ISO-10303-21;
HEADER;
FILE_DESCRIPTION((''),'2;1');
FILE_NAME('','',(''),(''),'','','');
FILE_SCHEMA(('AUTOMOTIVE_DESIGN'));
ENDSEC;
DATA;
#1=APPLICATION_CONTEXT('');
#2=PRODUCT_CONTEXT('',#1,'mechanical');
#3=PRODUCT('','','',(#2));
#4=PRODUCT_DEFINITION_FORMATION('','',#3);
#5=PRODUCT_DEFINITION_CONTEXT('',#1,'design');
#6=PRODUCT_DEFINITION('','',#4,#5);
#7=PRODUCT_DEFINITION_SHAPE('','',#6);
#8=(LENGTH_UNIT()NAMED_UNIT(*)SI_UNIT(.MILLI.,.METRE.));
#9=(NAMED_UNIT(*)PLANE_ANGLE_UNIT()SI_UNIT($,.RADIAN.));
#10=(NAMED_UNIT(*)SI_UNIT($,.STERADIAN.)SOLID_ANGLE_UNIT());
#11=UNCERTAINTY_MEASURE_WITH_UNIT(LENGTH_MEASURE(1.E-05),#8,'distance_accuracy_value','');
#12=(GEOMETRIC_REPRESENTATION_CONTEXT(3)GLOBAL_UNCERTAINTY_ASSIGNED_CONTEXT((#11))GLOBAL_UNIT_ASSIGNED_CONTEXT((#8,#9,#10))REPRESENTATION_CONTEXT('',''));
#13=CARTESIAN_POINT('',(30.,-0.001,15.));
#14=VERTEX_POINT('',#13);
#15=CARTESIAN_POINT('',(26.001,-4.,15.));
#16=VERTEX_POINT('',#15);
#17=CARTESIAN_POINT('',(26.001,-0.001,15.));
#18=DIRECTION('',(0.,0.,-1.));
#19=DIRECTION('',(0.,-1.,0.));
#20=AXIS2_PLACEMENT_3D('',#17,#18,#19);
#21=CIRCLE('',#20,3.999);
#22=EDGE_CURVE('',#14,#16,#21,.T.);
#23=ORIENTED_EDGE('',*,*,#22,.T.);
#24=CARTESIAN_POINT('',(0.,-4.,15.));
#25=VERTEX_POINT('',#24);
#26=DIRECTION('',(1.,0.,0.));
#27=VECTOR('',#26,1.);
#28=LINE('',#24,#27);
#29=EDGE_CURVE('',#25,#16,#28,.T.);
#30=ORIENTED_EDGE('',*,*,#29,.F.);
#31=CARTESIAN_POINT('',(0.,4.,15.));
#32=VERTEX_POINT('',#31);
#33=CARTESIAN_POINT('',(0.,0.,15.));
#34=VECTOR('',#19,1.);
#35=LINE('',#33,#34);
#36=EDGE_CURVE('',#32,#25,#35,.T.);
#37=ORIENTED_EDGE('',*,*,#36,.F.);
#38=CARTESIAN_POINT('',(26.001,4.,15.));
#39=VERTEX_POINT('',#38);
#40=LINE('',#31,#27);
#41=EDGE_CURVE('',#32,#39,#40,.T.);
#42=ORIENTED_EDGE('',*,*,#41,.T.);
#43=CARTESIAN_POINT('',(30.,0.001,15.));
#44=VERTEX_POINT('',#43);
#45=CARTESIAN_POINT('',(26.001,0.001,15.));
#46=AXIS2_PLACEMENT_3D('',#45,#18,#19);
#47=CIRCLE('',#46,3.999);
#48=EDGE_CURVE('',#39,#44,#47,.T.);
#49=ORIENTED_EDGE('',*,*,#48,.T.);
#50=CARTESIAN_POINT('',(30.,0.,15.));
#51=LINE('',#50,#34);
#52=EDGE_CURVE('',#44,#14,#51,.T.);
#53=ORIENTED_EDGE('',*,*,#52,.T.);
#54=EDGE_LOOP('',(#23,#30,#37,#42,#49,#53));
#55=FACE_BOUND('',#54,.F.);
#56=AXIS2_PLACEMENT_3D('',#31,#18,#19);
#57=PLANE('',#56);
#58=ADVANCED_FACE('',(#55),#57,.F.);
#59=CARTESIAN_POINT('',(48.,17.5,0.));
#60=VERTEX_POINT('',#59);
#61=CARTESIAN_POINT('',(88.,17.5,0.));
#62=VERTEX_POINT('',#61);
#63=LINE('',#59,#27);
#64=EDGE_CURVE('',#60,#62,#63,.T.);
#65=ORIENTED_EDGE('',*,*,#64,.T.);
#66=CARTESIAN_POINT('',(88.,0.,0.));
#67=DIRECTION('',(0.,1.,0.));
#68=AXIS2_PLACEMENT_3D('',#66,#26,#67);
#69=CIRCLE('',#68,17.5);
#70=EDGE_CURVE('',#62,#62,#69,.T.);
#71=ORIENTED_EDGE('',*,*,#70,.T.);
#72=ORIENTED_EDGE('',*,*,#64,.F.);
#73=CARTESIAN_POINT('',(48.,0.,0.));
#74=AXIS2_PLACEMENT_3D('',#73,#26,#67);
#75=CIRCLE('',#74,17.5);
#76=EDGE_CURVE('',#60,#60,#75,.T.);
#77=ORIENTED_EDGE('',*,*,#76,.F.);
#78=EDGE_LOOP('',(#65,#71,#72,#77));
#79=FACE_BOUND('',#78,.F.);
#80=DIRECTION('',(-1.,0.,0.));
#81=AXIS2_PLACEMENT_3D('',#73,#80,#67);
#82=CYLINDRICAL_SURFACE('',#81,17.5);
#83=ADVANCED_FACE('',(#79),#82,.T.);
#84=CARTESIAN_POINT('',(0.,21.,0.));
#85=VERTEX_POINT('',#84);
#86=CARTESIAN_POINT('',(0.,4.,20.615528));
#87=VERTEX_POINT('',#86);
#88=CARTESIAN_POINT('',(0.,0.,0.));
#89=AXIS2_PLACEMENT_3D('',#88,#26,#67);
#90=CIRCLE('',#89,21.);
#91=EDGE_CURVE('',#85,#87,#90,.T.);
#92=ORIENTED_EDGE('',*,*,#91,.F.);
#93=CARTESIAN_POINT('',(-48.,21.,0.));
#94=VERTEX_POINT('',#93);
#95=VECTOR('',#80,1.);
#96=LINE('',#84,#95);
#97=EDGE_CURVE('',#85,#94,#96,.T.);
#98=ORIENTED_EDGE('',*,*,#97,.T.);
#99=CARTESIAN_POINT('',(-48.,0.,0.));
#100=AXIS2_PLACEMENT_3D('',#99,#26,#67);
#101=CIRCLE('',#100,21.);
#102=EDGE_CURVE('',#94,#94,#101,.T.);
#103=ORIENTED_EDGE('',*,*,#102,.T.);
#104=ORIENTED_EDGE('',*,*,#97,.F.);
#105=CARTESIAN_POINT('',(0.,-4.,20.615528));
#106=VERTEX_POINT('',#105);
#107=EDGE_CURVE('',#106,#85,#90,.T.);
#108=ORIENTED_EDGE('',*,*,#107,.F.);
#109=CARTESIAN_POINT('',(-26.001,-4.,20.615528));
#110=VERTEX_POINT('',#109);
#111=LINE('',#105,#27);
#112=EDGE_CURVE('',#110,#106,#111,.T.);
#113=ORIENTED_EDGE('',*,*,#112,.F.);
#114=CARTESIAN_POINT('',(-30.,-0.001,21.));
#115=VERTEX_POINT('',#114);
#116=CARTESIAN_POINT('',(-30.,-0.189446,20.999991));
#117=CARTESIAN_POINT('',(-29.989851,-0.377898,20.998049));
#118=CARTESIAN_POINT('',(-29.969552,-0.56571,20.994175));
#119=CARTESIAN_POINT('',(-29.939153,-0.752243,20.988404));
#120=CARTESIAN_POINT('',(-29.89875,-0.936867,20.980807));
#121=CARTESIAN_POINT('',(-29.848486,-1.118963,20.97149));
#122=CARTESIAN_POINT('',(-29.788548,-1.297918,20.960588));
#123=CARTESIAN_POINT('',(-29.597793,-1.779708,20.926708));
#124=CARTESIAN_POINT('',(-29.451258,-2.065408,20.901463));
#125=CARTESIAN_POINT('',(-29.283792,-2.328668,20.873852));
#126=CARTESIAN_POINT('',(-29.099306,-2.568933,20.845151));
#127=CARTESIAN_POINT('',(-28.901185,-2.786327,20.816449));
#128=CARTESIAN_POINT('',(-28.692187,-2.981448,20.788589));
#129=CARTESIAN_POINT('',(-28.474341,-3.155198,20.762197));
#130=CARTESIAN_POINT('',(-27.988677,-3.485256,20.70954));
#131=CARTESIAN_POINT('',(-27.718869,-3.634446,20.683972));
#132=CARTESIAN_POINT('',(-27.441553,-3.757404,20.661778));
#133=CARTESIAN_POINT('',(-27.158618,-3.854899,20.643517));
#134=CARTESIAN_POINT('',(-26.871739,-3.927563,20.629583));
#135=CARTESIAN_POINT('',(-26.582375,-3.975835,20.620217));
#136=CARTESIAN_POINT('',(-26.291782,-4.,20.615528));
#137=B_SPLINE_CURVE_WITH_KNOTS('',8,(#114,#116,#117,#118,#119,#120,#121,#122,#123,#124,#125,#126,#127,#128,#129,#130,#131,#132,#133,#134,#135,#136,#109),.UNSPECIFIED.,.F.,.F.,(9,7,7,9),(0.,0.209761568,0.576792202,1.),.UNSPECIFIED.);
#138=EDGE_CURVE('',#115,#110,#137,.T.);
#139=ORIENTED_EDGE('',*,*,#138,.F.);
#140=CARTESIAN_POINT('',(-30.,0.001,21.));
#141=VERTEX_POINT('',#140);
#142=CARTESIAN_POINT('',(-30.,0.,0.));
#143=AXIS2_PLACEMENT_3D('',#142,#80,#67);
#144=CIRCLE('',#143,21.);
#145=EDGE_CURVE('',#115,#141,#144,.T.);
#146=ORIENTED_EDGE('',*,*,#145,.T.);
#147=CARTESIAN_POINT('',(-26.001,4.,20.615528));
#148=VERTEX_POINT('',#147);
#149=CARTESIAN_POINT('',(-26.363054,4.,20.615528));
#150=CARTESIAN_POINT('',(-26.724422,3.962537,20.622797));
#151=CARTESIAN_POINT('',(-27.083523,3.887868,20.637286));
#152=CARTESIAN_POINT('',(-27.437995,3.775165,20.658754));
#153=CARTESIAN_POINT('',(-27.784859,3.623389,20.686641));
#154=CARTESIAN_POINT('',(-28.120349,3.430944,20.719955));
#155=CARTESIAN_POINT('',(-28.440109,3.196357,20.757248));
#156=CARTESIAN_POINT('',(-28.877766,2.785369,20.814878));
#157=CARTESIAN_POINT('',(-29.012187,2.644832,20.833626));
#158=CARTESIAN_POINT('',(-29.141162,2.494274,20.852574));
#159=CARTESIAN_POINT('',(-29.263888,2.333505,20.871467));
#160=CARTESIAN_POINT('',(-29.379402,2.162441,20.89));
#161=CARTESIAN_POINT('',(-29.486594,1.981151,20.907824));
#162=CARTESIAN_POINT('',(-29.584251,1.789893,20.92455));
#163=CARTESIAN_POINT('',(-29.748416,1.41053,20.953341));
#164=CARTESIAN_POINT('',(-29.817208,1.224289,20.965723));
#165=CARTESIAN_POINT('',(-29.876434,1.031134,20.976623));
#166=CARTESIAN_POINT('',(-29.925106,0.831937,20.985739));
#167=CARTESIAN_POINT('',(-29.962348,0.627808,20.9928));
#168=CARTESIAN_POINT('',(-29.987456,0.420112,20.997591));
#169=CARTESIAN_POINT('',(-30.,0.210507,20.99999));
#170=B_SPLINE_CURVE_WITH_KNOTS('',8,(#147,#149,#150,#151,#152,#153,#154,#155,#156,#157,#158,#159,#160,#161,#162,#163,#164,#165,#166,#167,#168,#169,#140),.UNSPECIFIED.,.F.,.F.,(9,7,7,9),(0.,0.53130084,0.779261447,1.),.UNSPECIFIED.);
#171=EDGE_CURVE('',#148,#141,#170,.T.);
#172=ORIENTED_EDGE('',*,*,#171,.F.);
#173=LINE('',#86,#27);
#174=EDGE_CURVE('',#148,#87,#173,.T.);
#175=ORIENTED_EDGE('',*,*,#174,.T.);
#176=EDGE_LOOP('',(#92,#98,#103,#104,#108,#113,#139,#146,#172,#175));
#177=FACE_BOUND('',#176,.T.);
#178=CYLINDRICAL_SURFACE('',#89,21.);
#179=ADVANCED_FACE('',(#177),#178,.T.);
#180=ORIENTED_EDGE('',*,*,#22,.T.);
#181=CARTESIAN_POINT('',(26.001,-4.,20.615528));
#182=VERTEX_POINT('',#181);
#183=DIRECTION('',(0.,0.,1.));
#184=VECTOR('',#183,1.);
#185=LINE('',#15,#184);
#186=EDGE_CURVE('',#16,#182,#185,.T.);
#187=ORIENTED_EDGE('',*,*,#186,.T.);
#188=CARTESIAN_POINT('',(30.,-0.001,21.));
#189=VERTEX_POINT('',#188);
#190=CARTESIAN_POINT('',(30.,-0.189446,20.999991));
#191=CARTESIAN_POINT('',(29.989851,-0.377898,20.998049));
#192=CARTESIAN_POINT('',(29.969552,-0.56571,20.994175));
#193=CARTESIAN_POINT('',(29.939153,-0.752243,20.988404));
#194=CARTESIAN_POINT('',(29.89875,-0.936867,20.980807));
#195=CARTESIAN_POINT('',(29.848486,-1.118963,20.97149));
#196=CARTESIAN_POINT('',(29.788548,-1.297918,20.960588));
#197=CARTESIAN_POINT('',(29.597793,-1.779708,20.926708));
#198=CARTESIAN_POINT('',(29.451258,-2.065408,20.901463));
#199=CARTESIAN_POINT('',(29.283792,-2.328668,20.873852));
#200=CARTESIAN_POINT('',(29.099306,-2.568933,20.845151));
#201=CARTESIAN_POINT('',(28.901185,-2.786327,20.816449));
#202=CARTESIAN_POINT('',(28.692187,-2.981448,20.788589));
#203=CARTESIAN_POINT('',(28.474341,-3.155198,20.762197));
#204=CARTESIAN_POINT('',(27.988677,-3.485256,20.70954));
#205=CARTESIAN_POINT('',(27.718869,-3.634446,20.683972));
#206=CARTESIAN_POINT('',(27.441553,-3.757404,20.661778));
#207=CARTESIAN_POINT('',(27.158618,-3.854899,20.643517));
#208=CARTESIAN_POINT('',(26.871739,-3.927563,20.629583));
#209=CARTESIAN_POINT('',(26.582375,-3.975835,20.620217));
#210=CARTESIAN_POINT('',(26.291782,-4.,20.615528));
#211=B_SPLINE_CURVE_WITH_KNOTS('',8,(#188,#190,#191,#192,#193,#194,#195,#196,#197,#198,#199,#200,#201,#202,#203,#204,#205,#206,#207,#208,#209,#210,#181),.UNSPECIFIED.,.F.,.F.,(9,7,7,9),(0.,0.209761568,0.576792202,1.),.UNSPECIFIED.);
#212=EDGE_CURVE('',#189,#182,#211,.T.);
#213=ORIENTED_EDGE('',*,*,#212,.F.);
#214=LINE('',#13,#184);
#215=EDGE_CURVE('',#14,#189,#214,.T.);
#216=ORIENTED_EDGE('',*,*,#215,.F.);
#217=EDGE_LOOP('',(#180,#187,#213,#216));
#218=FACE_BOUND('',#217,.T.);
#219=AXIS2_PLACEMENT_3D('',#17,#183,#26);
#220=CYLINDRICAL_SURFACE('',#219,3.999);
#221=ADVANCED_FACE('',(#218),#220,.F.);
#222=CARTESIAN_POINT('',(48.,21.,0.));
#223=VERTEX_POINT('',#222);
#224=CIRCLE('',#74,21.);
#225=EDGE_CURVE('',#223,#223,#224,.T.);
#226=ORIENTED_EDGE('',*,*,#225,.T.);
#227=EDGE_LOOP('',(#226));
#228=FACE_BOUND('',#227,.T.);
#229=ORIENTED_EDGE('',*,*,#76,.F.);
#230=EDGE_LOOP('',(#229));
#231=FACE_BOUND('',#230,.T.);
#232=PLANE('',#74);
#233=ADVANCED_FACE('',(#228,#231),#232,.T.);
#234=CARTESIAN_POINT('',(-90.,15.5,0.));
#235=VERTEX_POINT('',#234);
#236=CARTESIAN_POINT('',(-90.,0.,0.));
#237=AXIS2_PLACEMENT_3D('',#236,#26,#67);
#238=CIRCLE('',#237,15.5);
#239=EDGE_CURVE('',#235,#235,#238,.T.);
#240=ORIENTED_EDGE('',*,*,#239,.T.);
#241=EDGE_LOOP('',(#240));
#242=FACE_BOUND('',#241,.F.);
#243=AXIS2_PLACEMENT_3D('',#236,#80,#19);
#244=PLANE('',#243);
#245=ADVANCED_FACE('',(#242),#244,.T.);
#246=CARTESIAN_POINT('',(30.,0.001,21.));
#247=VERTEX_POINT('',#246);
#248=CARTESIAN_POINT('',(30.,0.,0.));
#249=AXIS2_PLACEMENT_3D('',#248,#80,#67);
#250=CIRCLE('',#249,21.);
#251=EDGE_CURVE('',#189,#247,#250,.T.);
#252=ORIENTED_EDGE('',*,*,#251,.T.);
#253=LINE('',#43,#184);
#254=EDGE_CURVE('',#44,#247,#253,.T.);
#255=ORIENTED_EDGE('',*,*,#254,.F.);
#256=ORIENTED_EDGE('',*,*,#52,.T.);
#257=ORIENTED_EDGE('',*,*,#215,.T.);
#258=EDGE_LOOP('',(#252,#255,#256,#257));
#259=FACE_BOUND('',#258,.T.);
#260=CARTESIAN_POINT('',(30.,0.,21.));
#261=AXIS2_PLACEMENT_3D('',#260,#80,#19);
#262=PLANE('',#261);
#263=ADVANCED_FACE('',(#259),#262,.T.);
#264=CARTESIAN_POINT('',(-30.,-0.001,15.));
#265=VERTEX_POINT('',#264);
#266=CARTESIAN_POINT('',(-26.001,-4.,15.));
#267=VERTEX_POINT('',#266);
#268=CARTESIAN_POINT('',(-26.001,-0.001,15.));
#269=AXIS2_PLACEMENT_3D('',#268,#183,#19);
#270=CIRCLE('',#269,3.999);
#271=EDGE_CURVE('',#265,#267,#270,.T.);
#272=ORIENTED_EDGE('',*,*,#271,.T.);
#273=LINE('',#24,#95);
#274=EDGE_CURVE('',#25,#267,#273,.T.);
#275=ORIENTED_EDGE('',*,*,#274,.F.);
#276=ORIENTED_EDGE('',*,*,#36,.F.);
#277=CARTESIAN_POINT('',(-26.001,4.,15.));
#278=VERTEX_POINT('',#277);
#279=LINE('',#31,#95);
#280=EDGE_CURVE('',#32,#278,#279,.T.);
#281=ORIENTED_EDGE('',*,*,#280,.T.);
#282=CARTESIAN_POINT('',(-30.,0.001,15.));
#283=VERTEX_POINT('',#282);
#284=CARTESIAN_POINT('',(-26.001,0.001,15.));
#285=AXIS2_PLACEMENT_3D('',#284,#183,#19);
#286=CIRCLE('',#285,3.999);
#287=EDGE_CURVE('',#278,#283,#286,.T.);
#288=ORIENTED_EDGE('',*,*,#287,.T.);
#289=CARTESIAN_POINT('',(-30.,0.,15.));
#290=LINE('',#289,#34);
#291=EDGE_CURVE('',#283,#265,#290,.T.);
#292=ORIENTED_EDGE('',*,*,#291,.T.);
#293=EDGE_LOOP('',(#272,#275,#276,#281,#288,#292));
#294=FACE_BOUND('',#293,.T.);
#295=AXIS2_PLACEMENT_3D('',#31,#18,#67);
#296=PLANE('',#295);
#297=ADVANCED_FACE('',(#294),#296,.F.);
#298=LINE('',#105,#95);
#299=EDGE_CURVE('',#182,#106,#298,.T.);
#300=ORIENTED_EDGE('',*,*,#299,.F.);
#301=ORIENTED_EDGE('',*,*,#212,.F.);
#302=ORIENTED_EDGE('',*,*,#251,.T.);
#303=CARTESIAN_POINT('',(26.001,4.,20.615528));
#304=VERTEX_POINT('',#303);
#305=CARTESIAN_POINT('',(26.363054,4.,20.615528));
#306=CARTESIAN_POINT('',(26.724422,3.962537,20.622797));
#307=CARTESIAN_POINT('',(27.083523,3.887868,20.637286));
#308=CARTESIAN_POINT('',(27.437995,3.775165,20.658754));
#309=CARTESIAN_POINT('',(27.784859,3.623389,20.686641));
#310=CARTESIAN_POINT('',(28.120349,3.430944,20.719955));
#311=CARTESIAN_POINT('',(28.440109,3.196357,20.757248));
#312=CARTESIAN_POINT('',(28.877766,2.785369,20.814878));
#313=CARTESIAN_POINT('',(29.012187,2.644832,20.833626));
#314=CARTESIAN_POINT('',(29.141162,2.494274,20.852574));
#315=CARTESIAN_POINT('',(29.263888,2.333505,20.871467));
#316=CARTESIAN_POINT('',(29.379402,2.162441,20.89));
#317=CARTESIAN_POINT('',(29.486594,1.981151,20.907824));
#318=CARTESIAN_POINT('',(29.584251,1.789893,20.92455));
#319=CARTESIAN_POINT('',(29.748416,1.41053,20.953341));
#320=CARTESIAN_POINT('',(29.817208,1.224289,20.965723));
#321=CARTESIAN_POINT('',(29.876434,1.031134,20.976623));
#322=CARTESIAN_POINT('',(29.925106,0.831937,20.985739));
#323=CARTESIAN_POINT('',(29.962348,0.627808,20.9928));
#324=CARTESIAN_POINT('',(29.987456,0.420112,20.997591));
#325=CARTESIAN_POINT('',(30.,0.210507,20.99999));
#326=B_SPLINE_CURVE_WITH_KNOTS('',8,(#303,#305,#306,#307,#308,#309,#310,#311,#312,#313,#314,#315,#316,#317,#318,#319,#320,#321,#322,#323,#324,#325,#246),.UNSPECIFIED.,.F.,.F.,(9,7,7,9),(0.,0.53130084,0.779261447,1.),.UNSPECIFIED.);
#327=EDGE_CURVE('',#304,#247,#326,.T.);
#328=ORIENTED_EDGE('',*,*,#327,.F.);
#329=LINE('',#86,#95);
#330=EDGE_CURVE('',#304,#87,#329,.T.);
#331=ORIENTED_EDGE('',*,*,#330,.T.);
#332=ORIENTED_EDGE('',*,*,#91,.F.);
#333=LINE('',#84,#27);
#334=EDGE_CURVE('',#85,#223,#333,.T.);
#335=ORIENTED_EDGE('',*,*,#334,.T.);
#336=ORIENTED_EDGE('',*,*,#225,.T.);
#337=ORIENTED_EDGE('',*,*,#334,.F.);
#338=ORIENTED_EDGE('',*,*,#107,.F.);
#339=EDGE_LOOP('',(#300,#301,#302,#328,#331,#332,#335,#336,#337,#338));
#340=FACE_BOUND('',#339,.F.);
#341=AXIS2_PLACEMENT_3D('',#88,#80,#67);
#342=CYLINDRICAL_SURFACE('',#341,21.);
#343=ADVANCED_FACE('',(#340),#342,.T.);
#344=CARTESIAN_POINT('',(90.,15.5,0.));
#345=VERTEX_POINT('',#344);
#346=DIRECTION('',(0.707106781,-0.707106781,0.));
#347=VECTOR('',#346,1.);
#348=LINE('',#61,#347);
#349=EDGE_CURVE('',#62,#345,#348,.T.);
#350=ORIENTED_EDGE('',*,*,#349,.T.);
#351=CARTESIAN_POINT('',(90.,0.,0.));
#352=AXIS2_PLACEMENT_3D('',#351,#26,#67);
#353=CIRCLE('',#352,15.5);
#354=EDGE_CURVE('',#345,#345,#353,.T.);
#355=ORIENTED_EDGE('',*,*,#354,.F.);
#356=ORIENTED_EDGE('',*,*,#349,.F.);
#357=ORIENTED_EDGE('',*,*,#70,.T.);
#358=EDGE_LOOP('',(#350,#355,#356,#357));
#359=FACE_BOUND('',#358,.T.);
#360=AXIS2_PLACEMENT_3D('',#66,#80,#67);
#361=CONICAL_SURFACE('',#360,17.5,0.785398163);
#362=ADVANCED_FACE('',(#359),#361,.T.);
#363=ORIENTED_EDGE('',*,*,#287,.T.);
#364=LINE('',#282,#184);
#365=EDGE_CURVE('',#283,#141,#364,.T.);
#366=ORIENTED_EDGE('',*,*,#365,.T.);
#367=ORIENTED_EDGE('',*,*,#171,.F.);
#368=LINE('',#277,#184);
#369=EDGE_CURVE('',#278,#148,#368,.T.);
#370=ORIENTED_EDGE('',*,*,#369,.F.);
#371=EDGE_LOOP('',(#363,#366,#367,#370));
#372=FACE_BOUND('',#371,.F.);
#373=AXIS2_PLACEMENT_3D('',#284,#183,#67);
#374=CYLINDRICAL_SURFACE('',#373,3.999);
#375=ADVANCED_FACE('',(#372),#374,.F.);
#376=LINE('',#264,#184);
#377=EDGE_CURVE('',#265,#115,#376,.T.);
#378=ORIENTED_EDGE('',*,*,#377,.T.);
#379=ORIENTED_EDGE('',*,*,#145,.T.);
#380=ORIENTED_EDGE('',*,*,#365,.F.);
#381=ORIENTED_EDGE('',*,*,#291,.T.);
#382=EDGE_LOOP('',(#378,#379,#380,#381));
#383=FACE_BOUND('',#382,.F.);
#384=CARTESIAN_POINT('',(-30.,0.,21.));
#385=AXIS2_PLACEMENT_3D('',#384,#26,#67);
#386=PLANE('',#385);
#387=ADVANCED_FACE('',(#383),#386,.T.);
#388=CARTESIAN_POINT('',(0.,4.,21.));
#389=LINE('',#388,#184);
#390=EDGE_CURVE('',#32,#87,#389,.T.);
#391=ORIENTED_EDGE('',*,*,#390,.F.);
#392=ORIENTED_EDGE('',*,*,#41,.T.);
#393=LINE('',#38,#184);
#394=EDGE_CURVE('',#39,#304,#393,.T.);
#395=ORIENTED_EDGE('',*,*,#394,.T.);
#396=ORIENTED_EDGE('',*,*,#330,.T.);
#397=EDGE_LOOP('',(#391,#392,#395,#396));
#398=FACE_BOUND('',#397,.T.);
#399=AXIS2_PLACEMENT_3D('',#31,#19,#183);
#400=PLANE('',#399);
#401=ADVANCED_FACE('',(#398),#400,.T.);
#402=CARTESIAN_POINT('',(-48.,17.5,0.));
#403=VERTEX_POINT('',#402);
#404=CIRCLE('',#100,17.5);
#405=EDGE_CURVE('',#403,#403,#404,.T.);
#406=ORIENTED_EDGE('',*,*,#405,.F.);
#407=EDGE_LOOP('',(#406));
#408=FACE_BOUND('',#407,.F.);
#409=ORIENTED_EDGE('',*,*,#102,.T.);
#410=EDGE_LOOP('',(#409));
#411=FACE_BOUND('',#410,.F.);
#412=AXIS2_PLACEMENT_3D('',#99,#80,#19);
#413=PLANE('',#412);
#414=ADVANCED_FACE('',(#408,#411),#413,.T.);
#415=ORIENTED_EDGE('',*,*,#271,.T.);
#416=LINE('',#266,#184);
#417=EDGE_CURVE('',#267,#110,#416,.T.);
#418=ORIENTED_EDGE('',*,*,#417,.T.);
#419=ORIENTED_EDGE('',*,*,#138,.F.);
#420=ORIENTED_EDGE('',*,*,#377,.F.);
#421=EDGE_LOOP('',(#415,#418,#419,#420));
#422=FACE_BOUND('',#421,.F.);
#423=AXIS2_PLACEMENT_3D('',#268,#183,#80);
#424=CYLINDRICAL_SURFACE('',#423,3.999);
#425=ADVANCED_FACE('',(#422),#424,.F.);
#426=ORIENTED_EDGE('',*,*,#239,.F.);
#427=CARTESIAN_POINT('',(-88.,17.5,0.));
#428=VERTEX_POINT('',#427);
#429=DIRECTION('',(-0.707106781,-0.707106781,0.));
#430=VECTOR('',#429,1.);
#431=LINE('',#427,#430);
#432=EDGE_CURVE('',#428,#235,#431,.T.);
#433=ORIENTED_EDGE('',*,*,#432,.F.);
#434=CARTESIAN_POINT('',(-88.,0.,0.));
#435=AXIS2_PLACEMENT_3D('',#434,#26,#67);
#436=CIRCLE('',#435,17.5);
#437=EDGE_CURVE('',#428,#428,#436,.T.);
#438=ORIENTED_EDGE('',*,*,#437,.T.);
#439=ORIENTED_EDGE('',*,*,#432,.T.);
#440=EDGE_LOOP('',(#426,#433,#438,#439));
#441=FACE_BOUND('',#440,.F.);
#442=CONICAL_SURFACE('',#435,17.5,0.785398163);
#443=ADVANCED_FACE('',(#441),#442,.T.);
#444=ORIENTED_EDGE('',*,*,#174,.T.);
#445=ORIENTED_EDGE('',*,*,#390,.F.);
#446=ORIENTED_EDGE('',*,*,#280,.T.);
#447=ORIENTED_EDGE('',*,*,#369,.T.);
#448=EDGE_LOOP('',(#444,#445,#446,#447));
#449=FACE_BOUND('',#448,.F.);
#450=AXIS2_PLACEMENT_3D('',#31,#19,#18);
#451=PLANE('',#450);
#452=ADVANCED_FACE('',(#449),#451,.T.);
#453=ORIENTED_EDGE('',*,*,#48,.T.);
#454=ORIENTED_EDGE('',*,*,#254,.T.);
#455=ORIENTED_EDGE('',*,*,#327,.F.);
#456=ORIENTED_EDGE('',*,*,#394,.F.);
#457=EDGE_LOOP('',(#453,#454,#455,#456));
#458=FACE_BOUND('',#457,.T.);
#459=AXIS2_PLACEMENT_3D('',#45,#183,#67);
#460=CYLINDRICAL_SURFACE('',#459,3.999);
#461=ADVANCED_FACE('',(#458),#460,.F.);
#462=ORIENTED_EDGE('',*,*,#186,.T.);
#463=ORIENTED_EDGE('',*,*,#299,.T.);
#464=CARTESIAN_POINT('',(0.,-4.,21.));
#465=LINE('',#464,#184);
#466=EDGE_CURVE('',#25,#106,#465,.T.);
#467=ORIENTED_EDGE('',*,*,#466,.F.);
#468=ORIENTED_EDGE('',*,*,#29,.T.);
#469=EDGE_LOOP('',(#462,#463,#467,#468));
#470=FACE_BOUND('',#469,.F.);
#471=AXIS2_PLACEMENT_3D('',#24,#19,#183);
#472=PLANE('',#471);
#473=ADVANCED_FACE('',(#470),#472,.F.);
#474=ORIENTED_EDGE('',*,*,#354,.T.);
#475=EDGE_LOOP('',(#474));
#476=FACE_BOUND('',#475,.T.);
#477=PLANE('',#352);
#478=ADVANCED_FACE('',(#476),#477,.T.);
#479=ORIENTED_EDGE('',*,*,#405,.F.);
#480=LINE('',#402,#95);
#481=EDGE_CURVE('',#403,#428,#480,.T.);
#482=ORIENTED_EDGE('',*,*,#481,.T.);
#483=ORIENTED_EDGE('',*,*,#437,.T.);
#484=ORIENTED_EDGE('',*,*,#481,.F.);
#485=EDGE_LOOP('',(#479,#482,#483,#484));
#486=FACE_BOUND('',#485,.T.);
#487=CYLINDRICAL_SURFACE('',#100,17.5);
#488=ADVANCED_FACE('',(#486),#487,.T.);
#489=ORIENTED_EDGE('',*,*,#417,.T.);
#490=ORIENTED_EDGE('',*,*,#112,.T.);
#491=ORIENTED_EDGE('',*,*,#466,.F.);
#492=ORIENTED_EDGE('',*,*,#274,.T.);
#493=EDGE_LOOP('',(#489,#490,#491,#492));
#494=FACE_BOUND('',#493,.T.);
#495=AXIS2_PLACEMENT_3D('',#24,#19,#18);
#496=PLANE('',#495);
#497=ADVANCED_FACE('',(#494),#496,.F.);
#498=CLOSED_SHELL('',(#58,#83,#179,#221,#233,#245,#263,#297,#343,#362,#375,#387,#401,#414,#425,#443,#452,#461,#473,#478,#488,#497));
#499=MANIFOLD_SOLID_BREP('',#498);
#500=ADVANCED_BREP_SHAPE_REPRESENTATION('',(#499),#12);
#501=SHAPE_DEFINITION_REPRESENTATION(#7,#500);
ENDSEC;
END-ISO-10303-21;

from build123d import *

# Parameters (mm, degrees)
F0_R     = 21
F1_DEPTH = 48
F2_R     = 17.5
F3_DEPTH = 42
F4_SIZE  = 2
F5_W     = 8
F5_H     = 12
F6_DEPTH = 30
F7_R     = 3.999


# Not quite as in the source:
# - a fillet or chamfer is up to 0.001 mm smaller than in the source, because OpenCascade refuses the exact size


with BuildPart() as f1:
    # F0 (on Right) → F1 (new body)
    with BuildSketch(Plane.YZ):
        Circle(F0_R)
    extrude(amount=F1_DEPTH)

    # F2 (on face) → F3 (join)
    with BuildSketch(Plane.YZ.offset(48)):
        Circle(F2_R)
    extrude(amount=F3_DEPTH)

    # F4
    f4_edges = [f1.edges().sort_by_distance(p)[0] for p in [
        (90, -17.5, 0),
    ]]
    chamfer(f4_edges, length=F4_SIZE)

    # F5 (on face) → F6 (cut)
    with BuildSketch(Plane(origin=(0, 0, 0), x_dir=(0, -1, 0), z_dir=(-1, 0, 0))):
        with Locations((0, 21)):
            Rectangle(F5_W, F5_H)
    extrude(amount=-F6_DEPTH, mode=Mode.SUBTRACT)

    # F7 (radius 4 in the source; OpenCascade refuses exactly that, so slightly less here)
    f7_edges = [f1.edges().sort_by_distance(p)[0] for p in [
        (30, 4, 17.807764),
        (30, -4, 17.807764),
    ]]
    fillet(f7_edges, radius=F7_R)

    # F8: F1 across face


with BuildPart() as f1_1:
    add(f1.part)
    add(f1.part.mirror(Plane(origin=(0, 0, -0.629577464), x_dir=(0, 1, 0), z_dir=(-1, 0, 0))))


solid = f1_1.part
